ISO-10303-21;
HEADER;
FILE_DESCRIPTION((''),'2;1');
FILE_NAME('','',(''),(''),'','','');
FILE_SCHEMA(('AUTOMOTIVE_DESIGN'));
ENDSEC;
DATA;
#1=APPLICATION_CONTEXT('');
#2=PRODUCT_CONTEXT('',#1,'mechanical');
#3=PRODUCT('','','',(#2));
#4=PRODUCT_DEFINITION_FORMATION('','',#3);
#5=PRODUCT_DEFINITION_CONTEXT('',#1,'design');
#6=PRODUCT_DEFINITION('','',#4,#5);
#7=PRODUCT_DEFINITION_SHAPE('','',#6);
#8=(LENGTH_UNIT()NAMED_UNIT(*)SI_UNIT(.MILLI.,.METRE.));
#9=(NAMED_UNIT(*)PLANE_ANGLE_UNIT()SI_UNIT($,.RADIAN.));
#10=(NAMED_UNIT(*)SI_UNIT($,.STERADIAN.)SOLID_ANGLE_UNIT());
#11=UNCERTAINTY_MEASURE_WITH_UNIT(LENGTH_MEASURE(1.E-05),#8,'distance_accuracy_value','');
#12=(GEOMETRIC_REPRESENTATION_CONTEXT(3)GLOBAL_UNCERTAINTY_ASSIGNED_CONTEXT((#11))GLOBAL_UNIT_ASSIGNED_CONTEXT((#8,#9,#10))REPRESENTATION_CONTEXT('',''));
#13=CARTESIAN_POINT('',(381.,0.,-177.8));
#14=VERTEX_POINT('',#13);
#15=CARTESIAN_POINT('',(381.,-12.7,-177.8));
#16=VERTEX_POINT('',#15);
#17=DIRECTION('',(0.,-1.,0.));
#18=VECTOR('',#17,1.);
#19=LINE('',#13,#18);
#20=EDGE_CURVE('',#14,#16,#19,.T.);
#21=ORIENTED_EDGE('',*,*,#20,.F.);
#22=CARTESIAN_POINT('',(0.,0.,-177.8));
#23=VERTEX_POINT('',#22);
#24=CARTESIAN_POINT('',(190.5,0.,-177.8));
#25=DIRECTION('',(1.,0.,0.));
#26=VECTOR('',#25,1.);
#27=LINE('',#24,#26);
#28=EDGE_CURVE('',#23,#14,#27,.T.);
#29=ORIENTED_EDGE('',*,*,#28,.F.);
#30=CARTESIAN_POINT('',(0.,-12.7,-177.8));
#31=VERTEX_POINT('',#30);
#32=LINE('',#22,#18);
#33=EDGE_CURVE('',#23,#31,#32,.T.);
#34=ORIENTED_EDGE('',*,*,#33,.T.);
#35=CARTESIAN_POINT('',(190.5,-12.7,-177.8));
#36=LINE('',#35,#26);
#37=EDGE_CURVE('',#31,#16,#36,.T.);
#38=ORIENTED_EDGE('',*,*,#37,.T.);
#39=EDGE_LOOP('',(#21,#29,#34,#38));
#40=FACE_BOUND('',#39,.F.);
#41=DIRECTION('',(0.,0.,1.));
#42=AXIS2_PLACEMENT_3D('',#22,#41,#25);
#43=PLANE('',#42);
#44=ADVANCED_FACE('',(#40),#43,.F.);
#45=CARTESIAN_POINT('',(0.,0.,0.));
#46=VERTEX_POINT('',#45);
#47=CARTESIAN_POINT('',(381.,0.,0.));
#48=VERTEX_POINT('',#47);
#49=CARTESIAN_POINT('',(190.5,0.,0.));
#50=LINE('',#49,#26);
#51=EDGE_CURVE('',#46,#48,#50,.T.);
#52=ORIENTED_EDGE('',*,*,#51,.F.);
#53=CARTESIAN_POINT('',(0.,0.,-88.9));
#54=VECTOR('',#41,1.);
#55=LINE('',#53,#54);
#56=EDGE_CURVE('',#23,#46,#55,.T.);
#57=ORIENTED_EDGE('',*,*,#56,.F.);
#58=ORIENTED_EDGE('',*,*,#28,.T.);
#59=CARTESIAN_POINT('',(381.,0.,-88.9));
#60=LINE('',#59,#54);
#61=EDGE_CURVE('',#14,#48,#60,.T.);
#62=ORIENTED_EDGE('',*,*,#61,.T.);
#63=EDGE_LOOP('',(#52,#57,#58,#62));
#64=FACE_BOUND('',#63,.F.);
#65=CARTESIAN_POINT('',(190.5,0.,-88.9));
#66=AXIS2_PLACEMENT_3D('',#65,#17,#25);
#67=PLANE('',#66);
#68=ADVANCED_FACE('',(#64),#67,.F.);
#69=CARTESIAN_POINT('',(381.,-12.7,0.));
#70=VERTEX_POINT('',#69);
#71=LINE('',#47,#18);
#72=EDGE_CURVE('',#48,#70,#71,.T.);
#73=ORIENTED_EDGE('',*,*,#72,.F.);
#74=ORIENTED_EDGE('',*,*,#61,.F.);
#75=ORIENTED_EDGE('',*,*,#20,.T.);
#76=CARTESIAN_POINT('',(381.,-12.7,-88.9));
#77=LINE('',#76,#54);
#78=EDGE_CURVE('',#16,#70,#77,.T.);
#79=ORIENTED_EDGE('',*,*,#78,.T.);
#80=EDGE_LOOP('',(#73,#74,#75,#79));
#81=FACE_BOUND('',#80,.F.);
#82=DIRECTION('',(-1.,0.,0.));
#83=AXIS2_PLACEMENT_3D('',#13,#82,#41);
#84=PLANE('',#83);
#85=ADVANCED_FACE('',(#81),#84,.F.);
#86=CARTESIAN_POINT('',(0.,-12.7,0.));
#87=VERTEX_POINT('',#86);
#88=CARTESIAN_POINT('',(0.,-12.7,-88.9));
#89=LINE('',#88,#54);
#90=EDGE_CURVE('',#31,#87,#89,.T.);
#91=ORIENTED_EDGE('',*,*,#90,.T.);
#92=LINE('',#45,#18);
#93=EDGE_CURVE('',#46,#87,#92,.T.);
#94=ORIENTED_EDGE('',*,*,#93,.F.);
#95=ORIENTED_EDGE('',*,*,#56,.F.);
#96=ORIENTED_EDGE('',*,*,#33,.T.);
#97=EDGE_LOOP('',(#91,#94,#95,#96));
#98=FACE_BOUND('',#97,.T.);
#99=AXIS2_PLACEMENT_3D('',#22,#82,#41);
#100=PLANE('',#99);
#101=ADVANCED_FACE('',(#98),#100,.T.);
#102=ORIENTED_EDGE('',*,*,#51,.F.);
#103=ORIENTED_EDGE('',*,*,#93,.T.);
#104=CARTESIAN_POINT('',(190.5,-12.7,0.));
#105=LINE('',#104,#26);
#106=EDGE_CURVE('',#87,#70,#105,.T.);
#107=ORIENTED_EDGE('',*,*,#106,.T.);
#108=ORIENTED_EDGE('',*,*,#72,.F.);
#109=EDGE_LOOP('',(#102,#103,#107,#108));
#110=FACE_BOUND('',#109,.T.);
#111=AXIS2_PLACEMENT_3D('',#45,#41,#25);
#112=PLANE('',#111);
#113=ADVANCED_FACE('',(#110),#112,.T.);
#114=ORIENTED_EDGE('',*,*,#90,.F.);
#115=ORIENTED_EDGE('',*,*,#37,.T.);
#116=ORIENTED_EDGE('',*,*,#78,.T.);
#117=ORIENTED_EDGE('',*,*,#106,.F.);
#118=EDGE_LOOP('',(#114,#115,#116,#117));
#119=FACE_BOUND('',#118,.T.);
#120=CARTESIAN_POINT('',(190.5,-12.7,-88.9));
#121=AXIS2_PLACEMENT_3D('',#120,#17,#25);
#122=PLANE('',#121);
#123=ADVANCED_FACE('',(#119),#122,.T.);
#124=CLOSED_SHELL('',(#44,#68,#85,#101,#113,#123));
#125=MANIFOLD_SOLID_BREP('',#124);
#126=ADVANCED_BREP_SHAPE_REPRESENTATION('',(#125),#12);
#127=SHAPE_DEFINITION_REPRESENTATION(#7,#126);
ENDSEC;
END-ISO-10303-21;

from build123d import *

# Parameters (mm, degrees)
F0_W     = 381
F0_H     = 177.8
F2_DEPTH = 12.7


# Not quite as in the source:
# - a variable given as a bare number and used for a length is read in inches; the dataset says mm whatever the document's units were


with BuildPart() as f2:
    # F0 (on Front) → F2 (new body)
    with BuildSketch(Plane.XZ):
        with Locations((190.5, -88.9)):
            Rectangle(F0_W, F0_H)
    extrude(amount=F2_DEPTH)


solid = f2.part
